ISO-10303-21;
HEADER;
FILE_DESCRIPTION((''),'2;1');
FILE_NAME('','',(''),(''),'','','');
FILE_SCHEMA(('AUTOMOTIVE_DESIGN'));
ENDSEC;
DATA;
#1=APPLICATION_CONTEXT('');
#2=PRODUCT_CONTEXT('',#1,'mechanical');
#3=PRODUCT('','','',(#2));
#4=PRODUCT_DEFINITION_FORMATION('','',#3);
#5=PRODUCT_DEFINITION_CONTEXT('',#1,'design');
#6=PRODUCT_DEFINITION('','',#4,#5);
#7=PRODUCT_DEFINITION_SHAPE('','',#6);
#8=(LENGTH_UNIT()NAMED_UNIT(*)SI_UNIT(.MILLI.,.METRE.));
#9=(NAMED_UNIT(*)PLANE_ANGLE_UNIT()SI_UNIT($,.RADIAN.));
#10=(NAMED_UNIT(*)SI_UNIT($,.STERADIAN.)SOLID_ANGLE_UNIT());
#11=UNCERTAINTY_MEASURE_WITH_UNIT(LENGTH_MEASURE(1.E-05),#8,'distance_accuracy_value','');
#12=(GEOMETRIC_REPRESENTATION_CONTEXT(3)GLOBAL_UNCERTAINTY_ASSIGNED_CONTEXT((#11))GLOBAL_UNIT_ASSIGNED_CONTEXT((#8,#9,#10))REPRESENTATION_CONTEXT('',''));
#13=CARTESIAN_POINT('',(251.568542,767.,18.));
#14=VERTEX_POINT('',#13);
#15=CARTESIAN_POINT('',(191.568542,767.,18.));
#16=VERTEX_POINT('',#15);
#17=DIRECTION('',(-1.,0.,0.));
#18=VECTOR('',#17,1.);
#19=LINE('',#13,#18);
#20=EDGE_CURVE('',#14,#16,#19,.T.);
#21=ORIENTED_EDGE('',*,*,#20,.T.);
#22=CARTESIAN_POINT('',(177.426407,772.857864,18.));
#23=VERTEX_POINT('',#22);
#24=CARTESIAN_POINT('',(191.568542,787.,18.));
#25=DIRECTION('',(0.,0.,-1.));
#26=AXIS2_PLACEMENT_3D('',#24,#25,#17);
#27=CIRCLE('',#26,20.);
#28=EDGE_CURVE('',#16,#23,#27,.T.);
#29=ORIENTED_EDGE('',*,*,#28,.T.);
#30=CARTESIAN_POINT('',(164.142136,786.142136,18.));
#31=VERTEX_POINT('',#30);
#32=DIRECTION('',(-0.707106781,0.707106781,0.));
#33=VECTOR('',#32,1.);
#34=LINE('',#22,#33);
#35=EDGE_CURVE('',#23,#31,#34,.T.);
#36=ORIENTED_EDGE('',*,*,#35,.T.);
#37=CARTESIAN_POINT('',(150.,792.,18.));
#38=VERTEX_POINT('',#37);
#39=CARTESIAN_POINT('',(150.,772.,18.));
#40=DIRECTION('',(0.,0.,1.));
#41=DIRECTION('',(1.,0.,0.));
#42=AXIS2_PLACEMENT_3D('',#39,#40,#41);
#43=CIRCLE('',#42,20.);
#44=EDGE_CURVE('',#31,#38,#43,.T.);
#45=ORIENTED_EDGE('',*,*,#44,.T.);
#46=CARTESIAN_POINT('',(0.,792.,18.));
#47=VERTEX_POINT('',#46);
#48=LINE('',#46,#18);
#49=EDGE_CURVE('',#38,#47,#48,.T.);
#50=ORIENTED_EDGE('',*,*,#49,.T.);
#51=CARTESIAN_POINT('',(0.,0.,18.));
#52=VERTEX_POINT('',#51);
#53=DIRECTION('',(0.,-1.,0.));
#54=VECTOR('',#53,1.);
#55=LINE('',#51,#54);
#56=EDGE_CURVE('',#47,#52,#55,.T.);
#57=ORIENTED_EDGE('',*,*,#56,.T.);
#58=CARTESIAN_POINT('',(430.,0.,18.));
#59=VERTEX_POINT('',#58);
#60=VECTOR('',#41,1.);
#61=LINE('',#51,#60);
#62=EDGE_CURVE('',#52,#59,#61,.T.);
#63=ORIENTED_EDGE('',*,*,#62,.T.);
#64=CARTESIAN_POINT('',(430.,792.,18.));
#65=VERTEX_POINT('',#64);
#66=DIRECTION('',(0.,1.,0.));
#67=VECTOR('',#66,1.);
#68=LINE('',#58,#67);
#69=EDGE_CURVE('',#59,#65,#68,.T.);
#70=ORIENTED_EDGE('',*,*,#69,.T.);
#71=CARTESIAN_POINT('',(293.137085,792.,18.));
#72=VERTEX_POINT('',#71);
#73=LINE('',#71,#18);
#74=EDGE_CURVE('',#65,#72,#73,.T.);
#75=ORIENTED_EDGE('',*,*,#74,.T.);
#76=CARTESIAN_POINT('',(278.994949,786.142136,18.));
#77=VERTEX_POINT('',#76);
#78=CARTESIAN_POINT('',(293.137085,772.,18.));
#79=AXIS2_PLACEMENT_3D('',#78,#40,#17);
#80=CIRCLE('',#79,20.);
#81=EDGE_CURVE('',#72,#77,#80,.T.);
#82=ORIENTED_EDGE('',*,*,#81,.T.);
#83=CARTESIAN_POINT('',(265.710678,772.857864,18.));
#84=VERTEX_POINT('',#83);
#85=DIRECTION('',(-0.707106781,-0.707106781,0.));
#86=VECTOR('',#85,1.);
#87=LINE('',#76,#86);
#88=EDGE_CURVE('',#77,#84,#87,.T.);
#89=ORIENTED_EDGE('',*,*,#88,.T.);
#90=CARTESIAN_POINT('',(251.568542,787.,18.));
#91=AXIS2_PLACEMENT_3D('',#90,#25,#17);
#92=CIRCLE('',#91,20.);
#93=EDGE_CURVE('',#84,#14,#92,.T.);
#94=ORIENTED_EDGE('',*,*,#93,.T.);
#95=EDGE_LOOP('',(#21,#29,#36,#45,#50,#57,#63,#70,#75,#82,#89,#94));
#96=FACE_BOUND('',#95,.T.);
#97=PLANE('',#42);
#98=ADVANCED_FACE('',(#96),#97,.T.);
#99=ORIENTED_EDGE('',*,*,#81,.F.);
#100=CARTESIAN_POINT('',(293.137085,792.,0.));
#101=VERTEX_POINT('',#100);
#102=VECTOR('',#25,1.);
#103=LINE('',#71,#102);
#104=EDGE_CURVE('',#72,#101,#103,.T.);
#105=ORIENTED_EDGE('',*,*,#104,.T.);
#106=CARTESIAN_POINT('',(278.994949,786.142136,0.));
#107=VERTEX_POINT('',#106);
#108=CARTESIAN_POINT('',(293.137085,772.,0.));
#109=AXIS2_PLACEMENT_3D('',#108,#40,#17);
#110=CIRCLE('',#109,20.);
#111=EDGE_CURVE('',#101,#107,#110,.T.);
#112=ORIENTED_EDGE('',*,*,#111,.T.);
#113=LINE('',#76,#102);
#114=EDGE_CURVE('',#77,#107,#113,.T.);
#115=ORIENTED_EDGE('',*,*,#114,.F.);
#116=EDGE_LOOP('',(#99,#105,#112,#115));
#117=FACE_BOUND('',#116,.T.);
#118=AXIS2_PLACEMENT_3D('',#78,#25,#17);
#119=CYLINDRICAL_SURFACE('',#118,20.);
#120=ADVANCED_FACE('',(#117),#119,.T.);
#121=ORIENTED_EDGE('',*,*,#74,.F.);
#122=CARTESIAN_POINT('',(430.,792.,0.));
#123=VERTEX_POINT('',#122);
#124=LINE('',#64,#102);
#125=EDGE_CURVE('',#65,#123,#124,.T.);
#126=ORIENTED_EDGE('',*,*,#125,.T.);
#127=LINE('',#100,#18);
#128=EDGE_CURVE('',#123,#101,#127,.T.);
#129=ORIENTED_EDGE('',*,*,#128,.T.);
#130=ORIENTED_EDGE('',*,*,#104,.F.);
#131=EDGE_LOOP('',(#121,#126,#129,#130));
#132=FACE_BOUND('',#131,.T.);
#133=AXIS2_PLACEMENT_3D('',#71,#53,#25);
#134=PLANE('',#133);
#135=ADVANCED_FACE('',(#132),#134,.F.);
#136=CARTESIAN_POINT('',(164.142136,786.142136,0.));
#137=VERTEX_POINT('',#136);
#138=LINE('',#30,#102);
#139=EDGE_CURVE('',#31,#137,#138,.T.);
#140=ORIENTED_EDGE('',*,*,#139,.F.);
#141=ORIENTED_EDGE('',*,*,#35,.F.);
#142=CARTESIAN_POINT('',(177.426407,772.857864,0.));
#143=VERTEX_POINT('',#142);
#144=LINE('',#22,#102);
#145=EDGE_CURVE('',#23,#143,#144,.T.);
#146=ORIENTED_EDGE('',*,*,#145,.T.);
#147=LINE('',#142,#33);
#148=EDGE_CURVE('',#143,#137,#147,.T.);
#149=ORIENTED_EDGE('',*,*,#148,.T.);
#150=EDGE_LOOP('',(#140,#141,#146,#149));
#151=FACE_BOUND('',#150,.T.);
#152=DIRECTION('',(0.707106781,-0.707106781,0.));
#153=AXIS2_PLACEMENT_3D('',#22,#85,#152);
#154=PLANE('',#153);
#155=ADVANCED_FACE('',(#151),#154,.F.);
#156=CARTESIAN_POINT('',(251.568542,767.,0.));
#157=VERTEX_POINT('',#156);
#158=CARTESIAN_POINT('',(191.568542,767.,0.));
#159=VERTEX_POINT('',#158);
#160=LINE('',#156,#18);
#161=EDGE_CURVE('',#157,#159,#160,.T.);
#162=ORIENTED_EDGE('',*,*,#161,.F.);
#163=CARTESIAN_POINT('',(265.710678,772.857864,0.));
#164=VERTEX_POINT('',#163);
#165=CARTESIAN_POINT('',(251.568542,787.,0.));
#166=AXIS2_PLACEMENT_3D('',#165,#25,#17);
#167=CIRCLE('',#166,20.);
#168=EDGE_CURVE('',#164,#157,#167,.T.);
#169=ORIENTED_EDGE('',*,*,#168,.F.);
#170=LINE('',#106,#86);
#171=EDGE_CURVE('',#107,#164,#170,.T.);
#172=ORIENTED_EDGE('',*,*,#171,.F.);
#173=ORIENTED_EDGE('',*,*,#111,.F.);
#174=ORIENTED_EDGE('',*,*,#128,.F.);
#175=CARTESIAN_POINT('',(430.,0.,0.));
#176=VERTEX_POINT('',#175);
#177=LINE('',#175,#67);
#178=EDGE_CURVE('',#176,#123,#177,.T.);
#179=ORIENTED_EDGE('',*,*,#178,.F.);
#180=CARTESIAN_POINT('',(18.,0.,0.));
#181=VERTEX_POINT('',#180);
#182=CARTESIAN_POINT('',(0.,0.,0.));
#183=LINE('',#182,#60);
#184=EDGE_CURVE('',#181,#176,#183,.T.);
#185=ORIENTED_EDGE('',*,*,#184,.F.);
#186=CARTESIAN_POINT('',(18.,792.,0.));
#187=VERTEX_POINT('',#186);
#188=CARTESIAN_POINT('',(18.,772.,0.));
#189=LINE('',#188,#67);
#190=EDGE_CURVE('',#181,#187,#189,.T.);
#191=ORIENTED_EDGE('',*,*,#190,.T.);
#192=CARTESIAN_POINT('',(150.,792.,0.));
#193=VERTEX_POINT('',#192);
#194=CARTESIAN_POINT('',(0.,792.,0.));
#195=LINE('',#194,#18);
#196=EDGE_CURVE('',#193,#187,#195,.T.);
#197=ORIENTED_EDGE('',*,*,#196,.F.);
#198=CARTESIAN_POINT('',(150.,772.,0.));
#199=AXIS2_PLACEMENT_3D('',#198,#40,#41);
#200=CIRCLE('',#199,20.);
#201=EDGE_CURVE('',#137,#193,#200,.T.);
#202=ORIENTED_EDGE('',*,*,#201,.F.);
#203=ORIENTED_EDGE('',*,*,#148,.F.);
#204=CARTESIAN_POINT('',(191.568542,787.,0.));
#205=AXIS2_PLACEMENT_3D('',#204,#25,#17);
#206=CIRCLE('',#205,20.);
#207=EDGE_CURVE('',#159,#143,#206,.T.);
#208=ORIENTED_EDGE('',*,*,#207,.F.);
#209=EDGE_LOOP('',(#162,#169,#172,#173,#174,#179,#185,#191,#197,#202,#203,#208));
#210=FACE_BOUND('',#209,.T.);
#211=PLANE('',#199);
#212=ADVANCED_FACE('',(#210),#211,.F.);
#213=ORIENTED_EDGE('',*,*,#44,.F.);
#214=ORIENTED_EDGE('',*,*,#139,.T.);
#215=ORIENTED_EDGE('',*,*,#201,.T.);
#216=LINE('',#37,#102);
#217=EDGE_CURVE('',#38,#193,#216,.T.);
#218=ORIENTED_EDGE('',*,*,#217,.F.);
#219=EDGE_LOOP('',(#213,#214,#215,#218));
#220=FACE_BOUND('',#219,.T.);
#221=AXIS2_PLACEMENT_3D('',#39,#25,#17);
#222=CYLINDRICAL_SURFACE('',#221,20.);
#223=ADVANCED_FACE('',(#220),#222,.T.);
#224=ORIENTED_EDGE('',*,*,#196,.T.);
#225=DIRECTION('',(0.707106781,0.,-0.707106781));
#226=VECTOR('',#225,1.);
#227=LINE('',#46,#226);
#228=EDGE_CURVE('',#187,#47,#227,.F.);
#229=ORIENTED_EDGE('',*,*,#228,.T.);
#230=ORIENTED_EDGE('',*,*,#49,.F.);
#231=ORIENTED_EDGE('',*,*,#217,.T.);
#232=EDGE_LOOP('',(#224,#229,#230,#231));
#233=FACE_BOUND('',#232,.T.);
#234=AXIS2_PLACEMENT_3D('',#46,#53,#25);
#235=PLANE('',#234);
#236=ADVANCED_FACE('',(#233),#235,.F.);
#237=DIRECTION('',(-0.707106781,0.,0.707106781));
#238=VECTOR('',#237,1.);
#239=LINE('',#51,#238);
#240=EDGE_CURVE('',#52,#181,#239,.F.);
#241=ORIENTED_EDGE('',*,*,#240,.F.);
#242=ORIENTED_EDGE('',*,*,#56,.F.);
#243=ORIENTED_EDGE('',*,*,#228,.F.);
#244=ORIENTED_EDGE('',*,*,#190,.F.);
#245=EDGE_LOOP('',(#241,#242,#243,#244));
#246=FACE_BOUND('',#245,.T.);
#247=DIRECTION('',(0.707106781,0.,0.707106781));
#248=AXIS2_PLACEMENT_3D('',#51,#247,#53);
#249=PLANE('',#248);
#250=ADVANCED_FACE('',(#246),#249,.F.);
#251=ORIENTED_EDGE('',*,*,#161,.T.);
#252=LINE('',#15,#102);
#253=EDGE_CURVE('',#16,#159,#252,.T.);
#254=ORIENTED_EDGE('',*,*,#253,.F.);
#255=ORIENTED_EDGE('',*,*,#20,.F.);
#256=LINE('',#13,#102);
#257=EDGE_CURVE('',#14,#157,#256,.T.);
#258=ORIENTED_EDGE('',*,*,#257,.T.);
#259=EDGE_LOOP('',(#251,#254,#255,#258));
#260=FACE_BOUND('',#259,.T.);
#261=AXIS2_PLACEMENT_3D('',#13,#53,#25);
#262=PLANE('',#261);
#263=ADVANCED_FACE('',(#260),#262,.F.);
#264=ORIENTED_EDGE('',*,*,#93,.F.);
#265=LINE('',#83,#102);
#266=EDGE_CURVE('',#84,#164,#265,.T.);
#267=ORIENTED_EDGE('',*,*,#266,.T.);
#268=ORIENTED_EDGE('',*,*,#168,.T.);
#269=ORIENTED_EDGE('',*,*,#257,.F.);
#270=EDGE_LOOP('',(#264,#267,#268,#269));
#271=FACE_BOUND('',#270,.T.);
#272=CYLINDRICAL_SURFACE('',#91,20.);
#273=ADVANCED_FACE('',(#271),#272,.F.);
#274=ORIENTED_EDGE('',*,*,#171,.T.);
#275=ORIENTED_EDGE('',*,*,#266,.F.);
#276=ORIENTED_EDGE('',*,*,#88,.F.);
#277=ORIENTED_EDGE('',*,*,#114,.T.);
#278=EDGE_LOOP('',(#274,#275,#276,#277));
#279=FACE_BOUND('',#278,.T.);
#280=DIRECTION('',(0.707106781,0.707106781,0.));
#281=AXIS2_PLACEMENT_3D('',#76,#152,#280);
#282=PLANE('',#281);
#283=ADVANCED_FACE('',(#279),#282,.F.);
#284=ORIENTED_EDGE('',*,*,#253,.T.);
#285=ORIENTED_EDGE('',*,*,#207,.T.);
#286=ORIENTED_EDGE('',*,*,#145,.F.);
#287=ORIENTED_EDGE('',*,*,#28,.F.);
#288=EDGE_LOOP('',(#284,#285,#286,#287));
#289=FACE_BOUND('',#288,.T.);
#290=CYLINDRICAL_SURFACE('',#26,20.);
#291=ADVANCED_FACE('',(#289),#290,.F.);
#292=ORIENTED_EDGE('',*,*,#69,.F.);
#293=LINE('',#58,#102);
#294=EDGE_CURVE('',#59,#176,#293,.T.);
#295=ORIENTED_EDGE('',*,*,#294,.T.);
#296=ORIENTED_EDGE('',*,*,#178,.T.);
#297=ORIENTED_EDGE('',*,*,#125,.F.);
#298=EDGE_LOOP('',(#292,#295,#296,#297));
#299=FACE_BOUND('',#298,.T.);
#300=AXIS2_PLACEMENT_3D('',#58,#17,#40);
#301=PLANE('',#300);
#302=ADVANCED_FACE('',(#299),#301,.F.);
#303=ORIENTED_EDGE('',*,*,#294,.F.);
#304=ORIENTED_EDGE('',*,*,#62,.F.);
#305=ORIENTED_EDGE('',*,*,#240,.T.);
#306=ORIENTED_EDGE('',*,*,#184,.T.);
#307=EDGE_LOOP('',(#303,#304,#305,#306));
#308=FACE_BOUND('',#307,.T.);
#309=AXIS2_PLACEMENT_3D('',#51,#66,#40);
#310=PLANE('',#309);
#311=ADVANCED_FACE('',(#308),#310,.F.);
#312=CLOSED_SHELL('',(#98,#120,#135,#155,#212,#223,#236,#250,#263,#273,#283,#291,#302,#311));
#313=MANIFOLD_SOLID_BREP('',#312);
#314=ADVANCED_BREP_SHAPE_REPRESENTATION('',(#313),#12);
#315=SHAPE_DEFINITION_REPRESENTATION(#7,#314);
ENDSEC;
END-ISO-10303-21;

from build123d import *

# Parameters (mm, degrees)
BOSS_EXTRUDE1_DEPTH = 18
CHAMFER1_START      = -1
CHAMFER1_OUTLINE_W  = 28
CHAMFER1_OUTLINE_H  = 793
CHAMFER1_DEPTH      = 13.727922061


with BuildPart() as part:
    # Sketch1 → Boss-Extrude1 (new body)
    with BuildSketch(Plane.XY):
        with BuildLine():
            Line((278.994949366, 786.142135624), (265.710678119, 772.857864376))
            ThreePointArc((265.710678119, 772.857864376), (259.222211142, 768.52240935), (251.568542495, 767))
            Line((251.568542495, 767), (191.568542495, 767))
            ThreePointArc((191.568542495, 767), (183.914873848, 768.52240935), (177.426406871, 772.857864376))
            Line((177.426406871, 772.857864376), (164.142135624, 786.142135624))
            ThreePointArc((164.142135624, 786.142135624), (157.653668647, 790.47759065), (150, 792))
            Line((150, 792), (0, 792))
            Line((0, 792), (0, 0))
            Line((0, 0), (430, 0))
            Line((430, 0), (430, 792))
            Line((430, 792), (293.13708499, 792))
            ThreePointArc((293.13708499, 792), (285.483416343, 790.47759065), (278.994949366, 786.142135624))
        make_face()
    extrude(amount=BOSS_EXTRUDE1_DEPTH)

    # Chamfer1: read off the stored shape, not the designer's step
    # Chamfer1 outline → Chamfer1 (cut)
    with BuildSketch(Plane(origin=(0, 0, 0), x_dir=(0.7071067811865471, 0, -0.707106781186548), z_dir=(0.707106781186548, 0, 0.707106781186547)).offset(CHAMFER1_START)):
        with Locations((0, 395.5)):
            Rectangle(CHAMFER1_OUTLINE_W, CHAMFER1_OUTLINE_H)
    extrude(amount=CHAMFER1_DEPTH, mode=Mode.SUBTRACT)


solid = part.part
